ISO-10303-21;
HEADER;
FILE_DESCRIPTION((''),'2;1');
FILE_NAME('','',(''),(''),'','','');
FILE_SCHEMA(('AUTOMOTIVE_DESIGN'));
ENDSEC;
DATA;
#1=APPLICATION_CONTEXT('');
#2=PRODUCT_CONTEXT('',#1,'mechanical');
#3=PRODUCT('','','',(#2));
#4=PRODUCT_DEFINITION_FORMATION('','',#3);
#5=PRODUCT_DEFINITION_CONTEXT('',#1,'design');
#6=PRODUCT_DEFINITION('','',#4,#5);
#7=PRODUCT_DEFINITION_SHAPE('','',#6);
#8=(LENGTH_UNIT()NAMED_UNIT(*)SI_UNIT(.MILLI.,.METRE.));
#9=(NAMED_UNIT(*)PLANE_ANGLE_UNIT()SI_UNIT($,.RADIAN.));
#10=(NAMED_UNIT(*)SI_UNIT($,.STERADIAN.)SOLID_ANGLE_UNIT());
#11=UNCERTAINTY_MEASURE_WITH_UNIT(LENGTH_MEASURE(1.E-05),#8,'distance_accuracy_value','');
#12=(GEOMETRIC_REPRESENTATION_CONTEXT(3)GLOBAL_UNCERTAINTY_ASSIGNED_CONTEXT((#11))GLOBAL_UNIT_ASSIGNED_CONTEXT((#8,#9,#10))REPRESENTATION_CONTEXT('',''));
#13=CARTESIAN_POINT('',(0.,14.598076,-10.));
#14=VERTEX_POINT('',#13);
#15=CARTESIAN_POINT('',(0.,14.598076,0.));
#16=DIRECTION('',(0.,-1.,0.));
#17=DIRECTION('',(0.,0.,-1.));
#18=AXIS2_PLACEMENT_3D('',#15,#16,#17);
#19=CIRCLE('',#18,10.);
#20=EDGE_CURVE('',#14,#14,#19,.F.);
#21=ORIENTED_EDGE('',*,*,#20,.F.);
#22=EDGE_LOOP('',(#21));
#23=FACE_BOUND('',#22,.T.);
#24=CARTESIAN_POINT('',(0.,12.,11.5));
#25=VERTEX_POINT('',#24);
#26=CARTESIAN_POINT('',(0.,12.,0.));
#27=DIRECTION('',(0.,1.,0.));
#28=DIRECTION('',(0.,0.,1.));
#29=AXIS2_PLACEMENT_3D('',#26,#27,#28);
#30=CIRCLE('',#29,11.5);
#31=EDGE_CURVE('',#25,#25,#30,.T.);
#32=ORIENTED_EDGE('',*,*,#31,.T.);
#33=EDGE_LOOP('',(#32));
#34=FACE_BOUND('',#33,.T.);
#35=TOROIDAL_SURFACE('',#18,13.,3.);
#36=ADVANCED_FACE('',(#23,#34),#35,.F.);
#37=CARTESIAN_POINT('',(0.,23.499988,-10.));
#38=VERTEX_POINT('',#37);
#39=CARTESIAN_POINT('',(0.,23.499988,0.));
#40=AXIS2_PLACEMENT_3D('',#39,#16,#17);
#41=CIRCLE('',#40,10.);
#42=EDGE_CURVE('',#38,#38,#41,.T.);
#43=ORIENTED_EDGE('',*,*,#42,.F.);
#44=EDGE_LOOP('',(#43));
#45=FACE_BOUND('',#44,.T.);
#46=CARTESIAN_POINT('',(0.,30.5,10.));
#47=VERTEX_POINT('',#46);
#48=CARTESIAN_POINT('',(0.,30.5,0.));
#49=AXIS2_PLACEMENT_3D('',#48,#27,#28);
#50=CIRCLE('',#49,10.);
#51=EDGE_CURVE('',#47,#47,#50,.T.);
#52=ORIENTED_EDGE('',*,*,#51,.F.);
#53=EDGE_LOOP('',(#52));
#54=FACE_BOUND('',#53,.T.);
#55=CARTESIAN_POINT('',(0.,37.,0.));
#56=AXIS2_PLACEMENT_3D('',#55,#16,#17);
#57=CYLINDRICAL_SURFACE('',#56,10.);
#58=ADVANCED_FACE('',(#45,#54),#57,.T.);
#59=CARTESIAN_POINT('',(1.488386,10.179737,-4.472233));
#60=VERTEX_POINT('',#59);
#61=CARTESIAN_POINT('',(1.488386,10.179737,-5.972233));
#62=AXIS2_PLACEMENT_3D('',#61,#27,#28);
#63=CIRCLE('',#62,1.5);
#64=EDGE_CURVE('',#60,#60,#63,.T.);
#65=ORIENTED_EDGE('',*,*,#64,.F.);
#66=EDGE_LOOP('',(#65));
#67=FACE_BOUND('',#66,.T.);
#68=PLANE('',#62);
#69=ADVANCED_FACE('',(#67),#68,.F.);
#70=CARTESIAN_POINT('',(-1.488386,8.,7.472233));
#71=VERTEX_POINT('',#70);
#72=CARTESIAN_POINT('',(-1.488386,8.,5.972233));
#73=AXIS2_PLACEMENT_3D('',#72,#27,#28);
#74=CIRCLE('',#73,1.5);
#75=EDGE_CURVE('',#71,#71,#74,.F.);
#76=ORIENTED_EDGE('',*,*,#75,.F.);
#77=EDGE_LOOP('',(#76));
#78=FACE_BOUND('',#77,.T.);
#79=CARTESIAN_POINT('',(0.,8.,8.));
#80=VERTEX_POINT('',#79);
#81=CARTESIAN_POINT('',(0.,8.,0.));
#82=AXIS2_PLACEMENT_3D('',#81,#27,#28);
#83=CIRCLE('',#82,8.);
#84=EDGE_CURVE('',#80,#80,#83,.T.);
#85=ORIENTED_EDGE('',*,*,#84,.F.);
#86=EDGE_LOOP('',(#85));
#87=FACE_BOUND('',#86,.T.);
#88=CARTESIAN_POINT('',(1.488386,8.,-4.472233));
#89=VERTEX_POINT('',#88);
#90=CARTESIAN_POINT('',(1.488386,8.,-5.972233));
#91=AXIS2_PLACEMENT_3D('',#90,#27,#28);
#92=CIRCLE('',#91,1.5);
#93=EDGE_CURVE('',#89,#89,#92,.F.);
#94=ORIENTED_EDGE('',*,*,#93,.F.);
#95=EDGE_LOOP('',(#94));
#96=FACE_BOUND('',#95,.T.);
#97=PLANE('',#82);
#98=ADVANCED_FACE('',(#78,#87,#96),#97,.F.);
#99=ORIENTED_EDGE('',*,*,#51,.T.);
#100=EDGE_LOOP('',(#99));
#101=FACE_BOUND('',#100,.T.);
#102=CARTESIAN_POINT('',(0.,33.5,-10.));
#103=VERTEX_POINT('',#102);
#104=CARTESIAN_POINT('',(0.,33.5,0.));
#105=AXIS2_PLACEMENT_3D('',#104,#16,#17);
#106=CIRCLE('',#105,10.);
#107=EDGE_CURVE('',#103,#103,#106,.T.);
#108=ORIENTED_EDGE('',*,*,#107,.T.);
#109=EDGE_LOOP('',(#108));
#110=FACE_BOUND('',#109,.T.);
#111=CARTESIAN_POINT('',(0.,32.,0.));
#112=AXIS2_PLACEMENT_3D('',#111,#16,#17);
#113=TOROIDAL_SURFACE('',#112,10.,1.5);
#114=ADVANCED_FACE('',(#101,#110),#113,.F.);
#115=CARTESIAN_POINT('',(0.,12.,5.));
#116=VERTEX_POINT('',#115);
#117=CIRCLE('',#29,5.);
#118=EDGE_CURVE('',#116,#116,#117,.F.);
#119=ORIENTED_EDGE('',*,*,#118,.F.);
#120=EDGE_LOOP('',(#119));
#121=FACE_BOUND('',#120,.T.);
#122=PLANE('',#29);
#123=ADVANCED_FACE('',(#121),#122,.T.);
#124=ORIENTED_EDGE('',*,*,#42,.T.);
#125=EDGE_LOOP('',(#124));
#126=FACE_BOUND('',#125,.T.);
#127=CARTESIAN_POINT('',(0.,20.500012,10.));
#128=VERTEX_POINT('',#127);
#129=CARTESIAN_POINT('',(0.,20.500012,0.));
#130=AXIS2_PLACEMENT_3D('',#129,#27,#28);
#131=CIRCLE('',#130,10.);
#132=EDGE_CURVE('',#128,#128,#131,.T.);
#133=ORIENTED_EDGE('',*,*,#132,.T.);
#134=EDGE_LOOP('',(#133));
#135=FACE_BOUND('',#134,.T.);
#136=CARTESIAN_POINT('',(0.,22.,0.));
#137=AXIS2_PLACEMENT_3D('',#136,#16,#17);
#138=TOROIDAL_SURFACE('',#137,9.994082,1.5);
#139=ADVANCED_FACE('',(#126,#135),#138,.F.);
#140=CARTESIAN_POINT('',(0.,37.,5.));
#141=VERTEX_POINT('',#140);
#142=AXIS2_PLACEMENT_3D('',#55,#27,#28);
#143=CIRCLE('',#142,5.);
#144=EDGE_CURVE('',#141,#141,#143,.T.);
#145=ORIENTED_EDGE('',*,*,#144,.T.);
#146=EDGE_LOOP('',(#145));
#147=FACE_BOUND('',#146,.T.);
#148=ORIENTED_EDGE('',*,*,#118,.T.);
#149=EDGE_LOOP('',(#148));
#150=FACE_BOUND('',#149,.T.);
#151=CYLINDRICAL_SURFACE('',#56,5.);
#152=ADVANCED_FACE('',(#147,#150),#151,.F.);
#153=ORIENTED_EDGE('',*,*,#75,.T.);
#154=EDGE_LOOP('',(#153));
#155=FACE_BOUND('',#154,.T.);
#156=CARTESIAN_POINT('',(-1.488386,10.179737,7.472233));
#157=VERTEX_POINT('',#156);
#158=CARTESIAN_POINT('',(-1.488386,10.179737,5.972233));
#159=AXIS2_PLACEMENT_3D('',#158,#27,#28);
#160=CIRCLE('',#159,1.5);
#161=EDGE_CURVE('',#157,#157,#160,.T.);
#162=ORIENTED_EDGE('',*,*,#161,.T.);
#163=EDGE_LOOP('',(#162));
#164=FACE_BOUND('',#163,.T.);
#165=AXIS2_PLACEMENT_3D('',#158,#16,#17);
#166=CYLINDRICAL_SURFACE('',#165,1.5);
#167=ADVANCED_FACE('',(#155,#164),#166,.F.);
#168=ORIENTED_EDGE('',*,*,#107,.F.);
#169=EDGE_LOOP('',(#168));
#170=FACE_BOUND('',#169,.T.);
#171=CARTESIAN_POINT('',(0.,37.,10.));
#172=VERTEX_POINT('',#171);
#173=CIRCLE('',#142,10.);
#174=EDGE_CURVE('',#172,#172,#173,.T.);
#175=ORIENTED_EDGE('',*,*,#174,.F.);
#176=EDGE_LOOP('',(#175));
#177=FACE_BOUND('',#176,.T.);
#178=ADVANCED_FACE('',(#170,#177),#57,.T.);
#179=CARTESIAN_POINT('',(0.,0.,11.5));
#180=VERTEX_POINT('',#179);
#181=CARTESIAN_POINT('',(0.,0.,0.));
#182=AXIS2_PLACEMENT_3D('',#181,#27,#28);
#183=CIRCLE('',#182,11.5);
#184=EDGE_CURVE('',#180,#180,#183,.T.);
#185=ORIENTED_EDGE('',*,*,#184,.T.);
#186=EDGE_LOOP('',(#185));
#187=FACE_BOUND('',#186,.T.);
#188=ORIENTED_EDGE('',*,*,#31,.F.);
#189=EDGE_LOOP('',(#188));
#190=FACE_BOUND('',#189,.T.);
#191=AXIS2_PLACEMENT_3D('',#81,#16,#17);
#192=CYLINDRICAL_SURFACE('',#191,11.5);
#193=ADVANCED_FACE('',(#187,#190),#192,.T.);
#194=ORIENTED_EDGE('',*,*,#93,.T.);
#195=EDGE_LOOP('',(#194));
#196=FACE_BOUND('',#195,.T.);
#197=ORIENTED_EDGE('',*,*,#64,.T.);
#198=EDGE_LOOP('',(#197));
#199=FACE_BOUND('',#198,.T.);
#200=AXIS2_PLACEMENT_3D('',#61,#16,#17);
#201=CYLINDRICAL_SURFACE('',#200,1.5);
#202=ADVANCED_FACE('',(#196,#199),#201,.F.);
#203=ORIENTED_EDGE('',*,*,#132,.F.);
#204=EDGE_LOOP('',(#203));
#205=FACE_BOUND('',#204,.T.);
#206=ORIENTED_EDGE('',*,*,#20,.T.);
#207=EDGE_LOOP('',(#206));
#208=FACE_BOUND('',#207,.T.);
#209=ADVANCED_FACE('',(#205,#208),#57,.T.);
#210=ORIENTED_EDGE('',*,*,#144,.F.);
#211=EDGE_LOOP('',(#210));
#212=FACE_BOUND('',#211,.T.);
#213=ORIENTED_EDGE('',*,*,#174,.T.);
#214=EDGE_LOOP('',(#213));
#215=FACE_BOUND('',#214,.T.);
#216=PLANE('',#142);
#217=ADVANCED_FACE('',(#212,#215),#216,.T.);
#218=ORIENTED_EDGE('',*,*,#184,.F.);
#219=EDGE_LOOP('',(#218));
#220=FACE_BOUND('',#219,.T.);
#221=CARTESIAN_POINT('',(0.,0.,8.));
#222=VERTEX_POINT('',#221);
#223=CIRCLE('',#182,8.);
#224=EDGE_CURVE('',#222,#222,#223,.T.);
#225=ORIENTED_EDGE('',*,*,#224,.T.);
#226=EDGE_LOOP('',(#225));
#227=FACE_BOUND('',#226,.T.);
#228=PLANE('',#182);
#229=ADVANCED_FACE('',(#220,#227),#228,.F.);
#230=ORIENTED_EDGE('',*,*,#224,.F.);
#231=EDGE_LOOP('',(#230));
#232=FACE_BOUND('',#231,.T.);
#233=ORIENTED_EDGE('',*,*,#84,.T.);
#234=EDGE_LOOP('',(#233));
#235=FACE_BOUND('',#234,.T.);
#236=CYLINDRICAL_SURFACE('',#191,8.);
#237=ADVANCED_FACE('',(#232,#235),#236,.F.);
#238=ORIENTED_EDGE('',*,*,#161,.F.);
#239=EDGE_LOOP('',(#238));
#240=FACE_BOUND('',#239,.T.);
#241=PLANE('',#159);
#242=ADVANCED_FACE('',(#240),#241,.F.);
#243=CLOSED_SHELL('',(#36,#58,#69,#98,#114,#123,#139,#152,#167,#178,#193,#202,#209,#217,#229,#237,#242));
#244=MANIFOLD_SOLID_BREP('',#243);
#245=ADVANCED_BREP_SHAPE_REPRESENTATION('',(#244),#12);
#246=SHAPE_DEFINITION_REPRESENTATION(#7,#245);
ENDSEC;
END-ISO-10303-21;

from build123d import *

# Parameters (mm, degrees)
SKETCH_1_R          = 11.5
SKETCH_1_R_2        = 8
EXTRUDE_1_DEPTH     = 8
SKETCH_2_R          = 11.5
EXTRUDE_2_DEPTH     = 4
SKETCH_3_R          = 1.5
CUT_EXTRUDE_1_DEPTH = 2.2
SKETCH_4_R          = 10
SKETCH_4_R_2        = 5
EXTRUDE_3_DEPTH     = 25
FILLET_1_R          = 3
SKETCH_5_R          = 1.5


with BuildPart() as part:
    # Эскиз1 → Вытянуть1 (new body)
    with BuildSketch(Plane(origin=(0, 0, 0), x_dir=(1, 0, 0), z_dir=(0, 1, 0))):
        with Locations(Location((0, 0, 0), (0, 0, 270))):
            Circle(SKETCH_1_R)
        with Locations(Location((0, 0, 0), (0, 0, 270))):
            Circle(SKETCH_1_R_2, mode=Mode.SUBTRACT)
    extrude(amount=EXTRUDE_1_DEPTH)

    # Эскиз2 → Вытянуть2 (add)
    with BuildSketch(Plane(origin=(0, 8, 0), x_dir=(1, 0, 0), z_dir=(0, 1, 0))):
        with Locations(Location((0, 0, 0), (0, 0, 270))):
            Circle(SKETCH_2_R)
    extrude(amount=EXTRUDE_2_DEPTH)

    # Эскиз3 → Вырез-Вытянуть1 (cut)
    with BuildSketch(Plane(origin=(0, 7.979736606, 0), x_dir=(1, 0, 0), z_dir=(0, 1, 0))):
        with Locations(Location((-1.488385607, -5.972232604, 0), (0, 0, 270))):
            Circle(SKETCH_3_R)
        with Locations(Location((1.488385607, 5.972232604, 0), (0, 0, 270))):
            Circle(SKETCH_3_R)
    extrude(amount=CUT_EXTRUDE_1_DEPTH, mode=Mode.SUBTRACT)

    # Эскиз4 → Вытянуть3 (add)
    with BuildSketch(Plane(origin=(0, 12, 0), x_dir=(1, 0, 0), z_dir=(0, 1, 0))):
        with Locations(Location((0, 0, 0), (0, 0, 270))):
            Circle(SKETCH_4_R)
        with Locations(Location((0, 0, 0), (0, 0, 270))):
            Circle(SKETCH_4_R_2, mode=Mode.SUBTRACT)
    extrude(amount=EXTRUDE_3_DEPTH)

    # Скругление1
    # the kernel refuses this fillet: 3 mm, written as the material it adds along each edge
    with BuildSketch(Plane(origin=(0, 12, 0), x_dir=(0, 0, 1), z_dir=(-1, 0, 0))) as fillet_1_piece_1:
        with BuildLine():
            CenterArc((13, 2.598076211), FILLET_1_R, 180, 60)
            Line((10, 2.598076211), (9.94, 2.598076211))
            Line((9.94, 2.598076211), (9.94, 0))
            Line((9.94, 0), (10, -0.06))
            ThreePointArc((10, -0.06), (10.75, -0.06), (11.47, -0.051961524))
            Line((11.47, -0.051961524), (11.5, 0))
        make_face()
    revolve(axis=Axis((0, 12, 0), (0, 1, 0)))

    # Вырез-По траектории2: sweep along a path in Эскиз7
    with BuildLine(Plane(origin=(0, 32, 0), x_dir=(-1, 0, 0), z_dir=(0, 1, 0))) as sweep_2_path:
        CenterArc((0, 0), 10, 0, 360)
    # Эскиз5 → Вырез-По траектории2 (sweep, cut)
    with BuildSketch(Plane(origin=(0, 0, 0), x_dir=(0, 0, -1), z_dir=(1, 0, 0))):
        with Locations((-9.994082338, 22)):
            Circle(SKETCH_5_R)
        with Locations((-10, 32)):
            Circle(SKETCH_5_R)
    sweep(path=sweep_2_path.line, mode=Mode.SUBTRACT)


solid = part.part
